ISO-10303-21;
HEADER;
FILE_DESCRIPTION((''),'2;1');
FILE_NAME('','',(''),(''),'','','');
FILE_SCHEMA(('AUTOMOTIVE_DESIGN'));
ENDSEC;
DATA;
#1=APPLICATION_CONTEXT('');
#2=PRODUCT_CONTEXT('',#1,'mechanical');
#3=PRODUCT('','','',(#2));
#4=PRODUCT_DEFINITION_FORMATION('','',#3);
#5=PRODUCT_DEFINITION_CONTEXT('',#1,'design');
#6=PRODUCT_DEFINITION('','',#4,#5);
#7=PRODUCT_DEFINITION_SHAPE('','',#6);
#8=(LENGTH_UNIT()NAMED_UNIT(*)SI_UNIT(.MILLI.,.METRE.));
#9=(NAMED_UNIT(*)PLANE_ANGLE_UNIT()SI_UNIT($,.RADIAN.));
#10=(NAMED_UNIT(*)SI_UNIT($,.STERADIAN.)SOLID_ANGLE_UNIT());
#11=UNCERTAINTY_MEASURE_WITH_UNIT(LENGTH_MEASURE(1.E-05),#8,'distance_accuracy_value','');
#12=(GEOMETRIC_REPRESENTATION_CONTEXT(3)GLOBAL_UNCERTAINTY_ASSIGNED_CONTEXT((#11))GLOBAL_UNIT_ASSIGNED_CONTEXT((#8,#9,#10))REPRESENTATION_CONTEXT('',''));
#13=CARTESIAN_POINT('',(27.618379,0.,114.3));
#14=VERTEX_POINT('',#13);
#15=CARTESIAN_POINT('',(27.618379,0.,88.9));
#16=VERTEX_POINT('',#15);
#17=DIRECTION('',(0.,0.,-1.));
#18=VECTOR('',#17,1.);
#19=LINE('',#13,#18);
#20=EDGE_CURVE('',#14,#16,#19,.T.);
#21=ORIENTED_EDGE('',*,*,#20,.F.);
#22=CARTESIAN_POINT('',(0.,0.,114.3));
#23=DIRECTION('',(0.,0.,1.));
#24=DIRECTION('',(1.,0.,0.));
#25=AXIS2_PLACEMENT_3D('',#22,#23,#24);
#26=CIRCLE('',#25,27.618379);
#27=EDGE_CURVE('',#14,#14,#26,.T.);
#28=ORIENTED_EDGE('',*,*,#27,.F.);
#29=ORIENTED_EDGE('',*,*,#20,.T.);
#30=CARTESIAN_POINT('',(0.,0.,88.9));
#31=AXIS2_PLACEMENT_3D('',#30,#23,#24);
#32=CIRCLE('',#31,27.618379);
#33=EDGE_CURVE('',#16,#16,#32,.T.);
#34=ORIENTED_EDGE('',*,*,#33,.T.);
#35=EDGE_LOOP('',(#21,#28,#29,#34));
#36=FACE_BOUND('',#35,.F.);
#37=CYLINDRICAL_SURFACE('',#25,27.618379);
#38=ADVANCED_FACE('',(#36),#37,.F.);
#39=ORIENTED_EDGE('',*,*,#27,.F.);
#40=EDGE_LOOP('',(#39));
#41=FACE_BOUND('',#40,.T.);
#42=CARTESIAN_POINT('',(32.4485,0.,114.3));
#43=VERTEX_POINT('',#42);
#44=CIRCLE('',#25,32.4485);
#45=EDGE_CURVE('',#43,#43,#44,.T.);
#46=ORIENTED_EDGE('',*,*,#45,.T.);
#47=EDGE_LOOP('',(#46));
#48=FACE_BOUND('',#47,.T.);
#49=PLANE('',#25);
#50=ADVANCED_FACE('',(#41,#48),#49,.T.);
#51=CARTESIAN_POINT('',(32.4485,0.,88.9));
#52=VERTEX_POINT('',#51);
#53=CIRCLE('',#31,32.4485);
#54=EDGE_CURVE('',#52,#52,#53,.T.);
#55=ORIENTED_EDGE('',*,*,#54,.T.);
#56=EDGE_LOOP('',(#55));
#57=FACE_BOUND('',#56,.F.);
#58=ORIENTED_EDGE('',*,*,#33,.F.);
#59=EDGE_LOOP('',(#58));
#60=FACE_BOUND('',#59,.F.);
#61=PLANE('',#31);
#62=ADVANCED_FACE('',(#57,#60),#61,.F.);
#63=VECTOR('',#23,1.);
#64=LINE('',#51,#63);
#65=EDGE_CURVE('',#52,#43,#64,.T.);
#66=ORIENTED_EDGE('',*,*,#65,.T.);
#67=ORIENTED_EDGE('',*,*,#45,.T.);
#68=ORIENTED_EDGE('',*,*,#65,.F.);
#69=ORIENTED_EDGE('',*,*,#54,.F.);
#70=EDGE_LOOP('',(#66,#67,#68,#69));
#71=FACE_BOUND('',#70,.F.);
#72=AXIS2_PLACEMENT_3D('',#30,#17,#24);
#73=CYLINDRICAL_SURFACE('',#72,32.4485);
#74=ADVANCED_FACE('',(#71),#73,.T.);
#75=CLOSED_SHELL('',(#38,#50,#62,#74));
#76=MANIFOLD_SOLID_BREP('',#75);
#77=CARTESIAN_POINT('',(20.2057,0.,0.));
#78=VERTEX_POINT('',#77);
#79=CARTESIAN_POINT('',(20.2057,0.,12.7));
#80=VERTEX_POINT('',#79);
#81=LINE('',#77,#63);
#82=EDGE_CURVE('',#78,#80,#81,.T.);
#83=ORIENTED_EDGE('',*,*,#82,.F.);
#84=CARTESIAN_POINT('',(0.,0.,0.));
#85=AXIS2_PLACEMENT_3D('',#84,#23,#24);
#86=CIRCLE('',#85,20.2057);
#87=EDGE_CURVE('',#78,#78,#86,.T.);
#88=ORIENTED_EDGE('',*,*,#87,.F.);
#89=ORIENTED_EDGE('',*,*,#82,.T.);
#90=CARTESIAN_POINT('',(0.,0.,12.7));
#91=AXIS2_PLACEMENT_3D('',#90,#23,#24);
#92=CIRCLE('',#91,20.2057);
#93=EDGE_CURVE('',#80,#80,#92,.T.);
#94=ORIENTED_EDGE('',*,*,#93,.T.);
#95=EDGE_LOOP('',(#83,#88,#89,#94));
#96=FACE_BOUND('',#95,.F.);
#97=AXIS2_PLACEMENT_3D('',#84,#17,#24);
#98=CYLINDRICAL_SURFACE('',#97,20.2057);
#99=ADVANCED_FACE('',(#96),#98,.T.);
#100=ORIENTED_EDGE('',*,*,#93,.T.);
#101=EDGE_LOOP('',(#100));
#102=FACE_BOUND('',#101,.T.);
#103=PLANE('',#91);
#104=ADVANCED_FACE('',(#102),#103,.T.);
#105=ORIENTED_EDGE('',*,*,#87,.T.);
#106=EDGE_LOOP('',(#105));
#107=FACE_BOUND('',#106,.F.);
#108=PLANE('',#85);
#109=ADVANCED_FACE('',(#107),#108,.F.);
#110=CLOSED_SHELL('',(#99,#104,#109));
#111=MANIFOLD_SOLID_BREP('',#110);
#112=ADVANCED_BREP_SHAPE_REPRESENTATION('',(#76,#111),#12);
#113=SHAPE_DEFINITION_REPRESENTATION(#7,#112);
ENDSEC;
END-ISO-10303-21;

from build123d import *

# Parameters (mm, degrees)
F0_R     = 20.2057
F1_DEPTH = 12.7
F3_R     = 32.4485
F4_DEPTH = 25.4
F6_R     = 27.6183785492
F7_DEPTH = 25.4


# Not quite as in the source:
# - the program builds the solid bodies; features that only make, move or delete a surface that nothing else refers to are left out


with BuildPart() as f1:
    # F0 (on Top) → F1 (new body)
    with BuildSketch(Plane.XY):
        Circle(F0_R)
    extrude(amount=F1_DEPTH)


with BuildPart() as f4:
    # F3 (on offset) → F4 (new body)
    with BuildSketch(Plane.XY.offset(88.9)):
        Circle(F3_R)
    extrude(amount=F4_DEPTH)

    # F6 (on face) → F7 (cut)
    with BuildSketch(Plane.XY.offset(114.3)):
        Circle(F6_R)
    extrude(amount=-F7_DEPTH, mode=Mode.SUBTRACT)


solid = Compound([f1.part, f4.part])
